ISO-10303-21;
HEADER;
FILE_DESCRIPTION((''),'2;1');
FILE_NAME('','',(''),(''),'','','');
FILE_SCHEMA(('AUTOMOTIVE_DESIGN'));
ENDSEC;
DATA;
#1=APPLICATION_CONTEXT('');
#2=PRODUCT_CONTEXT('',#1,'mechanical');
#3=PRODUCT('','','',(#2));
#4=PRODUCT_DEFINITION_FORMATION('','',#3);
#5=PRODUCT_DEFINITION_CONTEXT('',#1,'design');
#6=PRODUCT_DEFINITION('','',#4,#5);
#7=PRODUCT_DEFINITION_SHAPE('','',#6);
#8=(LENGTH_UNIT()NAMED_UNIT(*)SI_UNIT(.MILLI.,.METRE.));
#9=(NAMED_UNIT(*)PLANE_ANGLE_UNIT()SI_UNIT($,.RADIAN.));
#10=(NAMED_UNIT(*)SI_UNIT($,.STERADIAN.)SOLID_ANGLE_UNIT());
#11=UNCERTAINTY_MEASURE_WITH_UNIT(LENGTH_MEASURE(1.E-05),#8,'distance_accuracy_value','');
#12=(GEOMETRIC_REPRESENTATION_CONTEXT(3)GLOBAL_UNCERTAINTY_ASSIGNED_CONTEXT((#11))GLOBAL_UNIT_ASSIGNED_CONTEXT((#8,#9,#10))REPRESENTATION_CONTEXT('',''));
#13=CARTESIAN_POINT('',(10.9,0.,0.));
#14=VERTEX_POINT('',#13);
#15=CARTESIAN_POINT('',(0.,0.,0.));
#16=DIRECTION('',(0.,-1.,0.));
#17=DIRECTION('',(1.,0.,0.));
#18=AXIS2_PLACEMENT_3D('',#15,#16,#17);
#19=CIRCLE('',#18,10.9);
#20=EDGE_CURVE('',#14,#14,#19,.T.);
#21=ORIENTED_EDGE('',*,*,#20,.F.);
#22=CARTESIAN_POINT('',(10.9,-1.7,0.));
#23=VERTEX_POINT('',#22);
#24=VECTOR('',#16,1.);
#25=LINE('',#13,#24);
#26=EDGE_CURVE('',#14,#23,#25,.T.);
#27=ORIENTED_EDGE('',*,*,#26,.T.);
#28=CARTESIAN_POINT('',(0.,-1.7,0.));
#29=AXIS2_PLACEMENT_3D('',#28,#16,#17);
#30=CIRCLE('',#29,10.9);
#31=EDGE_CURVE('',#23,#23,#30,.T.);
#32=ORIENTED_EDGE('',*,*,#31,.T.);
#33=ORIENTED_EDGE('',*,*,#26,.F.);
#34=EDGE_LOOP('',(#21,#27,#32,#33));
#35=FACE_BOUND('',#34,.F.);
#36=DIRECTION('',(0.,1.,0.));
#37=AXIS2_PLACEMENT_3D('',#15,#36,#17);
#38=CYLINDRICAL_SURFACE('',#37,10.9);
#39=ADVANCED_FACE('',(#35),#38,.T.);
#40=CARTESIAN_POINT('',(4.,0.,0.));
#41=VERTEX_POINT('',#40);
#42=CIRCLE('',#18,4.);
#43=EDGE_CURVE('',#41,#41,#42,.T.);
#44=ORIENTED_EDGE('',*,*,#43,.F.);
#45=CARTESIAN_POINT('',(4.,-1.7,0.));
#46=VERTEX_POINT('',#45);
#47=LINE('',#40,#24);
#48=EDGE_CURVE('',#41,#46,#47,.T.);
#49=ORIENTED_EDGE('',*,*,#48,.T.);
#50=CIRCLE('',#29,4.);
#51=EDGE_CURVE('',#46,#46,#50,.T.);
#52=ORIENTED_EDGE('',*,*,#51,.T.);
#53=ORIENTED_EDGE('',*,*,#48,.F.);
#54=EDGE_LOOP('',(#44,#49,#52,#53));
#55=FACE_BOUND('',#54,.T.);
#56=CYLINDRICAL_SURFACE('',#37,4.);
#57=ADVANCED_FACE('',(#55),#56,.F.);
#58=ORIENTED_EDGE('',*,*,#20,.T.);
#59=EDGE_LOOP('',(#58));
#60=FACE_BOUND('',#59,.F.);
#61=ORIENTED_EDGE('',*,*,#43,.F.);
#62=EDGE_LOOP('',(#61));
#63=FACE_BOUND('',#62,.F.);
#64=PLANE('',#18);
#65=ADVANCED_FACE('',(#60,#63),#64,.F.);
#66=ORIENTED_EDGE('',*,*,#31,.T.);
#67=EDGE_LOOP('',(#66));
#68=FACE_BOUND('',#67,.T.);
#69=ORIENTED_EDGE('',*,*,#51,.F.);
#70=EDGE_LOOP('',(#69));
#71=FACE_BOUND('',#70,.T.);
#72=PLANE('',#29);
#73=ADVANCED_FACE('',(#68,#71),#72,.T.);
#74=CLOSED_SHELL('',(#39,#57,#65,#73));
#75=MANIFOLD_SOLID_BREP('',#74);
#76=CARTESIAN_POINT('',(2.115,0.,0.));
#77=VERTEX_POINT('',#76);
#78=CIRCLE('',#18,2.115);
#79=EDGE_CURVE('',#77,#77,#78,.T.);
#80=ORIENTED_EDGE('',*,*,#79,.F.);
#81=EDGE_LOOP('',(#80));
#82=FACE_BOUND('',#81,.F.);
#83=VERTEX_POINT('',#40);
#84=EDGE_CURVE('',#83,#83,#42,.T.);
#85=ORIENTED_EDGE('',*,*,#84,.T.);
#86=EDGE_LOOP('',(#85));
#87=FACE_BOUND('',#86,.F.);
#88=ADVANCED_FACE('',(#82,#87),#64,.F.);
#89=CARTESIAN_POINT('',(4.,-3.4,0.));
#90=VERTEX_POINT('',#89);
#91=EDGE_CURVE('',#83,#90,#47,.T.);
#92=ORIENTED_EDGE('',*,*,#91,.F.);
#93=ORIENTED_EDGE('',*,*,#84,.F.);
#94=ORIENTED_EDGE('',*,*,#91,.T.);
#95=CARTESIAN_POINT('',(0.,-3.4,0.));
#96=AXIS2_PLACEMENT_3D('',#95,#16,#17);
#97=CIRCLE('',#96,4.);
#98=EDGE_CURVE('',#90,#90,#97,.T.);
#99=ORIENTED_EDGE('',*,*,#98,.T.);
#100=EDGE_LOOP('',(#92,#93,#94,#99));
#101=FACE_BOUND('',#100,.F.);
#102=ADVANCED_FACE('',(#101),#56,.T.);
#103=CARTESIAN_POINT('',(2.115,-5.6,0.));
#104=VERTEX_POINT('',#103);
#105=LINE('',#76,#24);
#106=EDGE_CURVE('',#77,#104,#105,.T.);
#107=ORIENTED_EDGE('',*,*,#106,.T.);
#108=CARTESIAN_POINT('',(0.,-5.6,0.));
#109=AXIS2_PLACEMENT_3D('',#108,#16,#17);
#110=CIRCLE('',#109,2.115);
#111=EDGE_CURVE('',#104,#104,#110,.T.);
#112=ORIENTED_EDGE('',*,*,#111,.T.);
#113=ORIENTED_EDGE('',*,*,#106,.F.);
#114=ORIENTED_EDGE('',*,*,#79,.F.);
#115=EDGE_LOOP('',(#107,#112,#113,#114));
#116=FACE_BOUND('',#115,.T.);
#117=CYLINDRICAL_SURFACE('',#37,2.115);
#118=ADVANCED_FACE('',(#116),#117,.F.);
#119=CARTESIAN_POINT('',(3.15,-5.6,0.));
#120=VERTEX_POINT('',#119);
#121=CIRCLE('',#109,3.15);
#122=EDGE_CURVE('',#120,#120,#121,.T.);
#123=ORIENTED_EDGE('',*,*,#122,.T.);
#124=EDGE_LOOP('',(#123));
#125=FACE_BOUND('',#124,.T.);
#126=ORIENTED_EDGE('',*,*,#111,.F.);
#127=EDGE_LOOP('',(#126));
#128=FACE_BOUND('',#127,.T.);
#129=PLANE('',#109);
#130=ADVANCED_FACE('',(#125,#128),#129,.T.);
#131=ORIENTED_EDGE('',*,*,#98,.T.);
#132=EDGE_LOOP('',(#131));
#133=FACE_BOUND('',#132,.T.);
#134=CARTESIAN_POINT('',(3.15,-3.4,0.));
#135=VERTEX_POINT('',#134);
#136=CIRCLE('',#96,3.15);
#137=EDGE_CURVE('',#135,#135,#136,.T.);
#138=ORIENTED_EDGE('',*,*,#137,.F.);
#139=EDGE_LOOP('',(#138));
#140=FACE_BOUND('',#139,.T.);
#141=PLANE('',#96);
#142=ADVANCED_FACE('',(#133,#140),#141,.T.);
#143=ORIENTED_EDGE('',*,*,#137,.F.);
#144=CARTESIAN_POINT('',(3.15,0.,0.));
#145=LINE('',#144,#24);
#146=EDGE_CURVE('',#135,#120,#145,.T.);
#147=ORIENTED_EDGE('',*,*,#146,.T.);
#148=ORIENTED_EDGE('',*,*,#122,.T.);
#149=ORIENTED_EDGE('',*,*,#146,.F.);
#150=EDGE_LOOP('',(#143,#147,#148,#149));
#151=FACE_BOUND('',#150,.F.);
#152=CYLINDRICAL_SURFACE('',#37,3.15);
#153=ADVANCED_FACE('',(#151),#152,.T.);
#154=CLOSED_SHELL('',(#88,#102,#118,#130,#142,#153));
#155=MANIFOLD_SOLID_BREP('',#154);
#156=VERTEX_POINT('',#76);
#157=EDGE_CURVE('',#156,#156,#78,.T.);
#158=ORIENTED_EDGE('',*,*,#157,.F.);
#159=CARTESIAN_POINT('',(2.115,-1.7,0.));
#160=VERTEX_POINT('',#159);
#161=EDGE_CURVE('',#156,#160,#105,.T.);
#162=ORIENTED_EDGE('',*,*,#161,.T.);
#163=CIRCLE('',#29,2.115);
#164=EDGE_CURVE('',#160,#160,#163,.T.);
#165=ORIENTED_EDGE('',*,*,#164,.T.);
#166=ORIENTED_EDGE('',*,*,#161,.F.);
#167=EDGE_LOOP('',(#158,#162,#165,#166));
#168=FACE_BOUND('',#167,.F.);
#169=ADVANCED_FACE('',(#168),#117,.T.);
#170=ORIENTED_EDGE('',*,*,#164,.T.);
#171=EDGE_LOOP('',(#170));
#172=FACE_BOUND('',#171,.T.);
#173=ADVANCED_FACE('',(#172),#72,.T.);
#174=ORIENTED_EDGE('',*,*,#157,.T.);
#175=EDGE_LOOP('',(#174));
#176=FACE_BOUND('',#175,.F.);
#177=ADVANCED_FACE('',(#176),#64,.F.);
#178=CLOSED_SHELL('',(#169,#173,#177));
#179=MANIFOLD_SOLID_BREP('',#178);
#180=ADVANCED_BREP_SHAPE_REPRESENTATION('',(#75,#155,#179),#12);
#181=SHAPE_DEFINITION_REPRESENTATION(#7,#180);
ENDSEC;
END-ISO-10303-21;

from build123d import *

# Parameters (mm, degrees)
F0_R     = 10.9
F0_R_2   = 4
F1_DEPTH = 1.7
F0_R_3   = 2.115
F0_R_4   = 3.15
F2_DEPTH = 3.4
F3_DEPTH = 5.6


with BuildPart() as f1:
    # F0 (on Front) → F1 (new body)
    with BuildSketch(Plane.XZ):
        Circle(F0_R)
        Circle(F0_R_2, mode=Mode.SUBTRACT)
    extrude(amount=F1_DEPTH)


with BuildPart() as f1b:
    # F0 (on Front) → F1, piece 2 (new body)
    with BuildSketch(Plane.XZ):
        Circle(F0_R_3)
    extrude(amount=F1_DEPTH)


with BuildPart() as f2:
    # F0 (on Front) → F2 (new body)
    with BuildSketch(Plane.XZ):
        Circle(F0_R_2)
        Circle(F0_R_4, mode=Mode.SUBTRACT)
    extrude(amount=F2_DEPTH)

    # F0 (on Front) → F3 (join)
    with BuildSketch(Plane.XZ):
        Circle(F0_R_4)
        Circle(F0_R_3, mode=Mode.SUBTRACT)
    extrude(amount=F3_DEPTH)


solid = Compound([f1.part, f1b.part, f2.part])
